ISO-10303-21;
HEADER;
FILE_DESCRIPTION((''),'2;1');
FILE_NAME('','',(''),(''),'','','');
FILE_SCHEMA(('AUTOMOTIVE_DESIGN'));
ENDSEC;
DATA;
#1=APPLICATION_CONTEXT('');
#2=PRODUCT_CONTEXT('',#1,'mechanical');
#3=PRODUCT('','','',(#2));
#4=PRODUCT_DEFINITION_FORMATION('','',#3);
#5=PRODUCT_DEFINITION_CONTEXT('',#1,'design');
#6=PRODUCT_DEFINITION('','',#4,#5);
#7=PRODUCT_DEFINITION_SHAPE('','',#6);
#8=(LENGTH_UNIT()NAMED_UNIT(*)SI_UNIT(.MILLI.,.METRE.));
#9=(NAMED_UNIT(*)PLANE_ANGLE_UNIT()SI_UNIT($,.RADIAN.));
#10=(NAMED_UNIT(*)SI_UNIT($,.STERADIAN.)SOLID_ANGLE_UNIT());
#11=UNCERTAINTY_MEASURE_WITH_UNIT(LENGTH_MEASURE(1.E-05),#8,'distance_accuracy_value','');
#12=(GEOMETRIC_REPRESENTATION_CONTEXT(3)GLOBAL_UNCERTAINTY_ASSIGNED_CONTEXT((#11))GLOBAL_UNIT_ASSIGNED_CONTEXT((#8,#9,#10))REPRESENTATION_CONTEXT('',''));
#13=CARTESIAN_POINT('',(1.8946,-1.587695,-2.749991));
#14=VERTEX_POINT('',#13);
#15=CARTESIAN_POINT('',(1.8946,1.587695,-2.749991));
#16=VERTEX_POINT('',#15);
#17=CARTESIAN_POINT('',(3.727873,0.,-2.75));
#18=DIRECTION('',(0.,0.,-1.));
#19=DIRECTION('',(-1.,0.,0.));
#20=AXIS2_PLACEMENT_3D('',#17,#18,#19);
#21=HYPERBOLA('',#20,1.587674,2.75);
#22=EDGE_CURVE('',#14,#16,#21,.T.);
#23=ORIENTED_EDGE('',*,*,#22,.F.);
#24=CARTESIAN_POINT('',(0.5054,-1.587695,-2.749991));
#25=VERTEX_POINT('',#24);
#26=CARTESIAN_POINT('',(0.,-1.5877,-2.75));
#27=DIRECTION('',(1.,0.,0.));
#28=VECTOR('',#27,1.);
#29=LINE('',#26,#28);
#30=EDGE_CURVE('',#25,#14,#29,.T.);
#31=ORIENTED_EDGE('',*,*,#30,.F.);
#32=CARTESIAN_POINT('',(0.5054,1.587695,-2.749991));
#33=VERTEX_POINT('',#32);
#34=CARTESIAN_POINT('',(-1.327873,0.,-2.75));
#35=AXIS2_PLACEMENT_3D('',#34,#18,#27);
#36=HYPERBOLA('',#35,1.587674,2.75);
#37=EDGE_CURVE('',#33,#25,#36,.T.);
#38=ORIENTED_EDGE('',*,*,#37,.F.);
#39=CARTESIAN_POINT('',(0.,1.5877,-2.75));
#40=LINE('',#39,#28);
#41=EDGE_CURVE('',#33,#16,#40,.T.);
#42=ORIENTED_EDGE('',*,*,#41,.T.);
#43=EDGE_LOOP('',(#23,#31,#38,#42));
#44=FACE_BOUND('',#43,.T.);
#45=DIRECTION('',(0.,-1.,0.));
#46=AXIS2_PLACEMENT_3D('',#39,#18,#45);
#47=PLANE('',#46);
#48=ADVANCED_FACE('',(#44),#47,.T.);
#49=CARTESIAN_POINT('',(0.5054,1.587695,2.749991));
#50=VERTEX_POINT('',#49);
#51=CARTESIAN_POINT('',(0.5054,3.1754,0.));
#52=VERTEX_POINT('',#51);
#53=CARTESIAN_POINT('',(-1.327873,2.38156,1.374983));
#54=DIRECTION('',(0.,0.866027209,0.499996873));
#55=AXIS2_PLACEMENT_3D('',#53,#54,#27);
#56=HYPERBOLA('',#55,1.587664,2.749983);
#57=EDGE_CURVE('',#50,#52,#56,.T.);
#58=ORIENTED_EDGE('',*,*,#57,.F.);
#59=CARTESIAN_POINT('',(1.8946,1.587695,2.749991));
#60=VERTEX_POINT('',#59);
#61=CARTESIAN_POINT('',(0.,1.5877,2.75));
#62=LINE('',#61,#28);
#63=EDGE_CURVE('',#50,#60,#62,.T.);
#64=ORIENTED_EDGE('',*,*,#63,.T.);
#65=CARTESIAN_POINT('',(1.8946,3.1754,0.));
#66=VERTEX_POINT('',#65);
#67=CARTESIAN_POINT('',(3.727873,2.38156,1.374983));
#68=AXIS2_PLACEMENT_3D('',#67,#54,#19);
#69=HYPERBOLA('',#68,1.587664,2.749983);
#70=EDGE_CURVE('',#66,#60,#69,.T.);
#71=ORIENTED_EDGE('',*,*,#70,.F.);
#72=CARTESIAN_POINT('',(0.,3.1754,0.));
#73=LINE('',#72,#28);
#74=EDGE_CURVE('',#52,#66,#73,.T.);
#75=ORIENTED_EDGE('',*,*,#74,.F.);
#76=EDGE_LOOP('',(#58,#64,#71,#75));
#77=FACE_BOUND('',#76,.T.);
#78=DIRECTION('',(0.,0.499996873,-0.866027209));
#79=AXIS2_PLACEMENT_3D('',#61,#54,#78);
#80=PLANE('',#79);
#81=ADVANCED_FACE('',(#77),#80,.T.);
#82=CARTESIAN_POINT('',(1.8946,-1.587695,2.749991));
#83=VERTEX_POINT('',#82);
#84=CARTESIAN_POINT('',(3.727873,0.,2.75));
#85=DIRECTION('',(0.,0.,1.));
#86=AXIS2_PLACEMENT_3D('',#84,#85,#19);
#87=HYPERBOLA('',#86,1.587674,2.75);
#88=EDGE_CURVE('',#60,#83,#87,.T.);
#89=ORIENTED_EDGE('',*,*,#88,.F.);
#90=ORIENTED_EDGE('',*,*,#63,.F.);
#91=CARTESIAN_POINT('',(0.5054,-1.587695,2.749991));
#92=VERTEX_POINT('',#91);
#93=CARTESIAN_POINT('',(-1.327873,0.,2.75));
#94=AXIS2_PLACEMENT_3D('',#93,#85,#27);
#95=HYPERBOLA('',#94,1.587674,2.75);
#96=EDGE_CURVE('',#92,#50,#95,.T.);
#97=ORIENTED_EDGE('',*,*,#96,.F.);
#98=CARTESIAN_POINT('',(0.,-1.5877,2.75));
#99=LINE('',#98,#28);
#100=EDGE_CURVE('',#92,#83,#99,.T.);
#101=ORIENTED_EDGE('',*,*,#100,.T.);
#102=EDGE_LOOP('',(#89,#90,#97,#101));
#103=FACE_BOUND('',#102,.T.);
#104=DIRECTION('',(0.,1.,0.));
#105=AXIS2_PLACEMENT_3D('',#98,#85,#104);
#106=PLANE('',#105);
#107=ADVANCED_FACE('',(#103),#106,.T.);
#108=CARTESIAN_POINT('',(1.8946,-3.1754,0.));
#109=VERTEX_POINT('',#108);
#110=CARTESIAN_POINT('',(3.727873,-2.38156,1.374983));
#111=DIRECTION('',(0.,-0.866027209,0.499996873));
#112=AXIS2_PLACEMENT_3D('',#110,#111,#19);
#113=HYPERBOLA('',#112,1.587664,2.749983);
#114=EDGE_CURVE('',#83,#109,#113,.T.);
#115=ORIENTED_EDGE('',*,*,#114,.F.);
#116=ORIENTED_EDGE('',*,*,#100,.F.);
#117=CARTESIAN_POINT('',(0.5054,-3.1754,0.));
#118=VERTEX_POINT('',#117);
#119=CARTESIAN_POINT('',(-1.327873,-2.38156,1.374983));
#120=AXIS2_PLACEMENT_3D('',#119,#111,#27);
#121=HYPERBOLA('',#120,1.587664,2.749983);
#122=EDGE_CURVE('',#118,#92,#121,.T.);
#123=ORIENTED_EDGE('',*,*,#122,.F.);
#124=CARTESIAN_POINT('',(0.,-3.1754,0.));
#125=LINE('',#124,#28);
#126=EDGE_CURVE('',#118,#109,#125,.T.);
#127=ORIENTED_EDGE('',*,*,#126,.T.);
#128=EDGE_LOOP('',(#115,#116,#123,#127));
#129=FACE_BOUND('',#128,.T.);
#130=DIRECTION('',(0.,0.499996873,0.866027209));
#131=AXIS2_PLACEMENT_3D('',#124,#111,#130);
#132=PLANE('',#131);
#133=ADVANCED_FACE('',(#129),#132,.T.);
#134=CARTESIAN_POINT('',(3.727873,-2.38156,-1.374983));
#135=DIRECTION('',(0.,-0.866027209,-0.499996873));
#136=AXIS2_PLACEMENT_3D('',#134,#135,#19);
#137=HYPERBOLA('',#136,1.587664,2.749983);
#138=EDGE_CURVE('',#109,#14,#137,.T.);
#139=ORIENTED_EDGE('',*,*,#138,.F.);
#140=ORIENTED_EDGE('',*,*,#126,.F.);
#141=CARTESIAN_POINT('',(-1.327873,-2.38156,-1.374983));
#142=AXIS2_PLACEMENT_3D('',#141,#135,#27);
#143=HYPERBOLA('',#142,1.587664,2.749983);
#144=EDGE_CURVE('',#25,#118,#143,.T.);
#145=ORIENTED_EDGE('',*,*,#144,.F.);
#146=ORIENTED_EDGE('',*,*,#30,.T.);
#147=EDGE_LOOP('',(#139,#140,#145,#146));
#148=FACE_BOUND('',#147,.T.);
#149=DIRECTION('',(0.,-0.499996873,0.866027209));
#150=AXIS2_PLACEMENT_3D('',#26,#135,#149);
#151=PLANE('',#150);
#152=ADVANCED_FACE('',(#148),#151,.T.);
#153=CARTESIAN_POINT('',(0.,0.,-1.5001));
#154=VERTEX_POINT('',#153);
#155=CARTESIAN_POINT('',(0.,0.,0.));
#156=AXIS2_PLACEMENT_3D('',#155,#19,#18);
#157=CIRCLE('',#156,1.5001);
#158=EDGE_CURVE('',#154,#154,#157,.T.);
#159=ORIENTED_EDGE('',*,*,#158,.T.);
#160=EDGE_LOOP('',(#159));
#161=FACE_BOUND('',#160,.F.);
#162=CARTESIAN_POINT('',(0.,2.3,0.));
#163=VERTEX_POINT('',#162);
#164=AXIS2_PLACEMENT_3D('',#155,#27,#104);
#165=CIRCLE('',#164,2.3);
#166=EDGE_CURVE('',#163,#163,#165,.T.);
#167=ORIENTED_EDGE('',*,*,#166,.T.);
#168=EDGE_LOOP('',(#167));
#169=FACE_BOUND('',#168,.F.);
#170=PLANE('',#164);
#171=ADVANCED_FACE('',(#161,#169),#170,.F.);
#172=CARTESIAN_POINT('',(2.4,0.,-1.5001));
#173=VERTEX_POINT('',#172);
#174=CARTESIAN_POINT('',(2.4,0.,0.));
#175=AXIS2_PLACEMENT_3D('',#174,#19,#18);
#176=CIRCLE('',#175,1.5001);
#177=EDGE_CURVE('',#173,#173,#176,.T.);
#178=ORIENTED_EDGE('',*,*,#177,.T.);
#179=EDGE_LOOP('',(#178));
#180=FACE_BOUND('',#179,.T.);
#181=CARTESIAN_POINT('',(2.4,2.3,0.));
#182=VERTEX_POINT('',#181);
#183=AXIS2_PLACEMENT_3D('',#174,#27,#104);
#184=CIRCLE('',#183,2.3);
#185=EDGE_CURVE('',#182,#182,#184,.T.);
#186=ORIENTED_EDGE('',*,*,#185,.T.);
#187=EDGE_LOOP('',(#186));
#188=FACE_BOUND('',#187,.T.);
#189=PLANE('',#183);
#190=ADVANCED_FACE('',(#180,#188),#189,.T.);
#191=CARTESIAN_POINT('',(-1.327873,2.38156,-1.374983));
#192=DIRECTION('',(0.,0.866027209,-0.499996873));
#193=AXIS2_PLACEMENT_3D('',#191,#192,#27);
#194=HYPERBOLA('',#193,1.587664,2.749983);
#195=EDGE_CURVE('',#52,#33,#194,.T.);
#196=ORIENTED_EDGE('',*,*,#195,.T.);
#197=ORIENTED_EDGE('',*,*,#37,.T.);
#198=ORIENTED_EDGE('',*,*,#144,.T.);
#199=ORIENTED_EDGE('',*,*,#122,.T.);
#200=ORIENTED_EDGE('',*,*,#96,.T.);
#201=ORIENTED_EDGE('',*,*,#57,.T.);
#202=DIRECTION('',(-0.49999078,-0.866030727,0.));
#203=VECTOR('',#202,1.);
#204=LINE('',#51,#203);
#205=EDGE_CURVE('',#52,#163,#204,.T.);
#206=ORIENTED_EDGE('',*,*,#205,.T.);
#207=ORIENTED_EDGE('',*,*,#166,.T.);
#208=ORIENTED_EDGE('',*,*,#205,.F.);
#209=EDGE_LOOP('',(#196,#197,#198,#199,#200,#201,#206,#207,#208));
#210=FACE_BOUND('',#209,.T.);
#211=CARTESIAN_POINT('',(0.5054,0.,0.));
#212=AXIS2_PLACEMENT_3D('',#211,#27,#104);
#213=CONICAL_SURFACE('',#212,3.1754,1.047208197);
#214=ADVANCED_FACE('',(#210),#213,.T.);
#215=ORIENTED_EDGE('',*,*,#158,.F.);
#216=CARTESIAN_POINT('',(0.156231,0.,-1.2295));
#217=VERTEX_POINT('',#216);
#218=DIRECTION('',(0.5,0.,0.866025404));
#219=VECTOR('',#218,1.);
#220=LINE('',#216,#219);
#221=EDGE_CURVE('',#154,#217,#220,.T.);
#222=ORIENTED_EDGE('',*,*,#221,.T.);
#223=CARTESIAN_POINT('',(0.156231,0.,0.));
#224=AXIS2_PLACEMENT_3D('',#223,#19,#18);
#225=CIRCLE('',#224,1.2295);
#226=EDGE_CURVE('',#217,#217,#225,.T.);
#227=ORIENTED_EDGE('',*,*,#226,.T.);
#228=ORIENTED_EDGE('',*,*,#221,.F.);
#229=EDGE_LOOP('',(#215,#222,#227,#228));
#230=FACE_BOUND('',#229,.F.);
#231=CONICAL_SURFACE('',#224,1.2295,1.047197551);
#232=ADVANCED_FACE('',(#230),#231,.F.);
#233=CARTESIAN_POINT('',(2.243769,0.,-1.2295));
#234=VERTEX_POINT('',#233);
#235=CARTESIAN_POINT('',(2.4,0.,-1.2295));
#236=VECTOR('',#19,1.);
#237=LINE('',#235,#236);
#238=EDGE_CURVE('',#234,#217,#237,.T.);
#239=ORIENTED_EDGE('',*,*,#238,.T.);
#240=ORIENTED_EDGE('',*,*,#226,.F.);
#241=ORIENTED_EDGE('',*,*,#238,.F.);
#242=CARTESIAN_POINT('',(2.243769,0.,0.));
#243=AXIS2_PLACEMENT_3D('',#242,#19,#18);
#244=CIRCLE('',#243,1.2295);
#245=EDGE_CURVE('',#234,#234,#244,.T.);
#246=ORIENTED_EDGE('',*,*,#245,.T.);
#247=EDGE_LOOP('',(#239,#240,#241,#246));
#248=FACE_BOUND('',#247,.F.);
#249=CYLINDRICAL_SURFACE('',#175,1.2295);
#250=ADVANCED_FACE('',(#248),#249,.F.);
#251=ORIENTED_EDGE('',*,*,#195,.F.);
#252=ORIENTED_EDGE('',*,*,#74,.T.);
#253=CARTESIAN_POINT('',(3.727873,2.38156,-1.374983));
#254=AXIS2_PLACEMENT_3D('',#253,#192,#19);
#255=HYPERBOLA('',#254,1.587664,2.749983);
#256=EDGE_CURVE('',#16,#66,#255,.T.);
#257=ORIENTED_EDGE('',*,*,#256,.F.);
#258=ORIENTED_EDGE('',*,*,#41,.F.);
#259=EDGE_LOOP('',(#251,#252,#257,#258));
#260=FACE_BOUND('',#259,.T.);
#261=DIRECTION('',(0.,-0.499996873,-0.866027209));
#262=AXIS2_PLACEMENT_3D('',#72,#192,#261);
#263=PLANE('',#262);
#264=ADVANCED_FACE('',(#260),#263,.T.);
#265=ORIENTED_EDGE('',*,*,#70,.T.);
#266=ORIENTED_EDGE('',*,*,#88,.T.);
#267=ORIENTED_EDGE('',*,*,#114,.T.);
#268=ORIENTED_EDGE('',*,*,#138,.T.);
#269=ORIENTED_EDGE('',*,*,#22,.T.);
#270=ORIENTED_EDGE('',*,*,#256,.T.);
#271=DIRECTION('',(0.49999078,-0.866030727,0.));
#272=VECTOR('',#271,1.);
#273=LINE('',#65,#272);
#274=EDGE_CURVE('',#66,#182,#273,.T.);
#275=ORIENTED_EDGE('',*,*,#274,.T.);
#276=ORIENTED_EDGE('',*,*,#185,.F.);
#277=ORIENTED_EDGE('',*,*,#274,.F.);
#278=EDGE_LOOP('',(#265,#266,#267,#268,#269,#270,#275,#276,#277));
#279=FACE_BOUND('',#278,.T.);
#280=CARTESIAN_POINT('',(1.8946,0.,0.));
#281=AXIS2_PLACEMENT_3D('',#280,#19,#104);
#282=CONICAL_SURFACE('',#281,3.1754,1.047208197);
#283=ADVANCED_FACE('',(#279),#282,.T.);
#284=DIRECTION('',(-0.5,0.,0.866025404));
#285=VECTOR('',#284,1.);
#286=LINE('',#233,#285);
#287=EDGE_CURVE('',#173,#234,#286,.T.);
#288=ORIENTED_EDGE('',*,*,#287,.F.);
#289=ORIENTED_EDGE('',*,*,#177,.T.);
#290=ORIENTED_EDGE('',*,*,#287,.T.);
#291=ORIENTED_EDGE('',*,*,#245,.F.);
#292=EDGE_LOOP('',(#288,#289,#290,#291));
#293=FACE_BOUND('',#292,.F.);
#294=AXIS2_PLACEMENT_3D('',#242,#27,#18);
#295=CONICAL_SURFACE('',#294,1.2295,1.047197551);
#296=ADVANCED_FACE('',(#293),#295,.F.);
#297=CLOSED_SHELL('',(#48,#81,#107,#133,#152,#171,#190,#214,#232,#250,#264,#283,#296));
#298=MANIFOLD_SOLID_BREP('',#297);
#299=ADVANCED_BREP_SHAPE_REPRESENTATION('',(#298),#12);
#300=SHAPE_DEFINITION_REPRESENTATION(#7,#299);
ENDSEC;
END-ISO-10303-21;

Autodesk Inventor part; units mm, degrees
ref_plane "YZ Plane" through (0, 0, 0) normal (1, 0, 0) x (0, 1, 0)
ref_plane "XZ Plane" through (0, 0, 0) normal (0, 1, 0) x (-1, 0, 0)
sketch "Sketch1" plane through (0, 0, 0) normal (1, 0, 0) x (0, 1, 0)
  line L0 (-3.1754, 0) -> (-1.5877, 2.75)
  line L1 (-1.5877, 2.75) -> (1.5877, 2.75)
  line L2 (1.5877, 2.75) -> (3.1754, 0)
  line L3 (3.1754, 0) -> (1.5877, -2.75)
  line L4 (1.5877, -2.75) -> (-1.5877, -2.75)
  line L5 (-1.5877, -2.75) -> (-3.1754, 0)
  point P0 (0, 0)
  point P1 (0, 0)
  dimension "d0" = 6.3509
extrude "Body" add sketch "Sketch1" along normal blind 2.4
sketch "Sketch2" plane through (0, 0, 0) normal (0, 0, 1) x (1, 0, 0)
  line L0 (0, 1.5877) -> (0, 3.1754) projected
  line L1 (0, 3.1754) -> (2.4, 3.1754) projected
  line L2 (2.4, 1.5877) -> (2.4, 3.1754) projected
  line L3 (-0.48, 0) -> (2.88, 0) projected
  line L4 (0.5054, 3.1754) -> (0, 2.3)
  line L5 (1.8946, 3.1754) -> (2.4, 2.3)
  dimension "d3" = 30
  dimension "d4" = 30
  dimension "d5" = 4.6
  dimension "d6" = 4.6
revolve "Chamfer1" cut sketch "Sketch2" angle 360 about axis through (-10, 0, 0) along (1, 0, 0)
sketch "Sketch3" plane through (2.4, 0, 0) normal (1, 0, 0) x (0, 0, -1)
  arc A0 (-0.625, -1.0825) -> (0.625, -1.0825) centre (0, 0) ccw projected
hole "Thread" at (2.4, 0, 0) direction (-1, 0, 0) diameter 2.459 end through all thread size "M3x0.5" class "6H" standard "ISO Metric profile"
chamfer "Chamfer2" distance 0.2706 angle 30 1 edges at (2.4, 0, 1.2295) measured on face at (2.4, 1.9179, -0.2329)
chamfer "Chamfer3" distance 0.2706 angle 30 1 edges at (0, 0, 1.2295) measured on face at (0, 1.9179, -0.2329)
ref_plane "Work Plane1" through (-6.3375, 0, 0) normal (0, -0.8660254, -0.5) x (1, 0, 0)
equation "\"d0\" = 1.1547 * SW"
equation "\"d1\" = KOH"
equation "\"d3\" = ANG1"
equation "\"d4\" = ANG2"
equation "\"d5\" = SW0"
equation "\"d6\" = SW01"
equation "\"d8\" = -0.5 * GD1 + 0.5 * NND"
equation "\"d40\" = -0.5 * GD1 + 0.5 * NND"
equation "\"d10\" = -0.5 * GD1 + 0.5 * NND"
equation "\"d41\" = -0.5 * GD1 + 0.5 * NND"
equation "\"ANG1\" = 30deg"
equation "\"ANG2\" = 30deg"
equation "\"NND\" = 3"
equation "\"KOH\" = 2.4"
equation "\"SW\" = 5.5"
equation "\"SW0\" = 4.6"
equation "\"SW01\" = SW0"
equation "\"GUL\" = 0.541266 * PTC"
equation "\"THREADDIA\" = 3"
equation "\"TOA\" = 30deg"
equation "\"PTC\" = 0.5"
equation "\"E0\" = 1.155 * SW"
equation "\"GAL\" = 0.541266 * PTC"
equation "\"GD1\" = 2.458734"
properties part number "Brass M3 Hex Nut" material "Brass, Soft Yellow"
